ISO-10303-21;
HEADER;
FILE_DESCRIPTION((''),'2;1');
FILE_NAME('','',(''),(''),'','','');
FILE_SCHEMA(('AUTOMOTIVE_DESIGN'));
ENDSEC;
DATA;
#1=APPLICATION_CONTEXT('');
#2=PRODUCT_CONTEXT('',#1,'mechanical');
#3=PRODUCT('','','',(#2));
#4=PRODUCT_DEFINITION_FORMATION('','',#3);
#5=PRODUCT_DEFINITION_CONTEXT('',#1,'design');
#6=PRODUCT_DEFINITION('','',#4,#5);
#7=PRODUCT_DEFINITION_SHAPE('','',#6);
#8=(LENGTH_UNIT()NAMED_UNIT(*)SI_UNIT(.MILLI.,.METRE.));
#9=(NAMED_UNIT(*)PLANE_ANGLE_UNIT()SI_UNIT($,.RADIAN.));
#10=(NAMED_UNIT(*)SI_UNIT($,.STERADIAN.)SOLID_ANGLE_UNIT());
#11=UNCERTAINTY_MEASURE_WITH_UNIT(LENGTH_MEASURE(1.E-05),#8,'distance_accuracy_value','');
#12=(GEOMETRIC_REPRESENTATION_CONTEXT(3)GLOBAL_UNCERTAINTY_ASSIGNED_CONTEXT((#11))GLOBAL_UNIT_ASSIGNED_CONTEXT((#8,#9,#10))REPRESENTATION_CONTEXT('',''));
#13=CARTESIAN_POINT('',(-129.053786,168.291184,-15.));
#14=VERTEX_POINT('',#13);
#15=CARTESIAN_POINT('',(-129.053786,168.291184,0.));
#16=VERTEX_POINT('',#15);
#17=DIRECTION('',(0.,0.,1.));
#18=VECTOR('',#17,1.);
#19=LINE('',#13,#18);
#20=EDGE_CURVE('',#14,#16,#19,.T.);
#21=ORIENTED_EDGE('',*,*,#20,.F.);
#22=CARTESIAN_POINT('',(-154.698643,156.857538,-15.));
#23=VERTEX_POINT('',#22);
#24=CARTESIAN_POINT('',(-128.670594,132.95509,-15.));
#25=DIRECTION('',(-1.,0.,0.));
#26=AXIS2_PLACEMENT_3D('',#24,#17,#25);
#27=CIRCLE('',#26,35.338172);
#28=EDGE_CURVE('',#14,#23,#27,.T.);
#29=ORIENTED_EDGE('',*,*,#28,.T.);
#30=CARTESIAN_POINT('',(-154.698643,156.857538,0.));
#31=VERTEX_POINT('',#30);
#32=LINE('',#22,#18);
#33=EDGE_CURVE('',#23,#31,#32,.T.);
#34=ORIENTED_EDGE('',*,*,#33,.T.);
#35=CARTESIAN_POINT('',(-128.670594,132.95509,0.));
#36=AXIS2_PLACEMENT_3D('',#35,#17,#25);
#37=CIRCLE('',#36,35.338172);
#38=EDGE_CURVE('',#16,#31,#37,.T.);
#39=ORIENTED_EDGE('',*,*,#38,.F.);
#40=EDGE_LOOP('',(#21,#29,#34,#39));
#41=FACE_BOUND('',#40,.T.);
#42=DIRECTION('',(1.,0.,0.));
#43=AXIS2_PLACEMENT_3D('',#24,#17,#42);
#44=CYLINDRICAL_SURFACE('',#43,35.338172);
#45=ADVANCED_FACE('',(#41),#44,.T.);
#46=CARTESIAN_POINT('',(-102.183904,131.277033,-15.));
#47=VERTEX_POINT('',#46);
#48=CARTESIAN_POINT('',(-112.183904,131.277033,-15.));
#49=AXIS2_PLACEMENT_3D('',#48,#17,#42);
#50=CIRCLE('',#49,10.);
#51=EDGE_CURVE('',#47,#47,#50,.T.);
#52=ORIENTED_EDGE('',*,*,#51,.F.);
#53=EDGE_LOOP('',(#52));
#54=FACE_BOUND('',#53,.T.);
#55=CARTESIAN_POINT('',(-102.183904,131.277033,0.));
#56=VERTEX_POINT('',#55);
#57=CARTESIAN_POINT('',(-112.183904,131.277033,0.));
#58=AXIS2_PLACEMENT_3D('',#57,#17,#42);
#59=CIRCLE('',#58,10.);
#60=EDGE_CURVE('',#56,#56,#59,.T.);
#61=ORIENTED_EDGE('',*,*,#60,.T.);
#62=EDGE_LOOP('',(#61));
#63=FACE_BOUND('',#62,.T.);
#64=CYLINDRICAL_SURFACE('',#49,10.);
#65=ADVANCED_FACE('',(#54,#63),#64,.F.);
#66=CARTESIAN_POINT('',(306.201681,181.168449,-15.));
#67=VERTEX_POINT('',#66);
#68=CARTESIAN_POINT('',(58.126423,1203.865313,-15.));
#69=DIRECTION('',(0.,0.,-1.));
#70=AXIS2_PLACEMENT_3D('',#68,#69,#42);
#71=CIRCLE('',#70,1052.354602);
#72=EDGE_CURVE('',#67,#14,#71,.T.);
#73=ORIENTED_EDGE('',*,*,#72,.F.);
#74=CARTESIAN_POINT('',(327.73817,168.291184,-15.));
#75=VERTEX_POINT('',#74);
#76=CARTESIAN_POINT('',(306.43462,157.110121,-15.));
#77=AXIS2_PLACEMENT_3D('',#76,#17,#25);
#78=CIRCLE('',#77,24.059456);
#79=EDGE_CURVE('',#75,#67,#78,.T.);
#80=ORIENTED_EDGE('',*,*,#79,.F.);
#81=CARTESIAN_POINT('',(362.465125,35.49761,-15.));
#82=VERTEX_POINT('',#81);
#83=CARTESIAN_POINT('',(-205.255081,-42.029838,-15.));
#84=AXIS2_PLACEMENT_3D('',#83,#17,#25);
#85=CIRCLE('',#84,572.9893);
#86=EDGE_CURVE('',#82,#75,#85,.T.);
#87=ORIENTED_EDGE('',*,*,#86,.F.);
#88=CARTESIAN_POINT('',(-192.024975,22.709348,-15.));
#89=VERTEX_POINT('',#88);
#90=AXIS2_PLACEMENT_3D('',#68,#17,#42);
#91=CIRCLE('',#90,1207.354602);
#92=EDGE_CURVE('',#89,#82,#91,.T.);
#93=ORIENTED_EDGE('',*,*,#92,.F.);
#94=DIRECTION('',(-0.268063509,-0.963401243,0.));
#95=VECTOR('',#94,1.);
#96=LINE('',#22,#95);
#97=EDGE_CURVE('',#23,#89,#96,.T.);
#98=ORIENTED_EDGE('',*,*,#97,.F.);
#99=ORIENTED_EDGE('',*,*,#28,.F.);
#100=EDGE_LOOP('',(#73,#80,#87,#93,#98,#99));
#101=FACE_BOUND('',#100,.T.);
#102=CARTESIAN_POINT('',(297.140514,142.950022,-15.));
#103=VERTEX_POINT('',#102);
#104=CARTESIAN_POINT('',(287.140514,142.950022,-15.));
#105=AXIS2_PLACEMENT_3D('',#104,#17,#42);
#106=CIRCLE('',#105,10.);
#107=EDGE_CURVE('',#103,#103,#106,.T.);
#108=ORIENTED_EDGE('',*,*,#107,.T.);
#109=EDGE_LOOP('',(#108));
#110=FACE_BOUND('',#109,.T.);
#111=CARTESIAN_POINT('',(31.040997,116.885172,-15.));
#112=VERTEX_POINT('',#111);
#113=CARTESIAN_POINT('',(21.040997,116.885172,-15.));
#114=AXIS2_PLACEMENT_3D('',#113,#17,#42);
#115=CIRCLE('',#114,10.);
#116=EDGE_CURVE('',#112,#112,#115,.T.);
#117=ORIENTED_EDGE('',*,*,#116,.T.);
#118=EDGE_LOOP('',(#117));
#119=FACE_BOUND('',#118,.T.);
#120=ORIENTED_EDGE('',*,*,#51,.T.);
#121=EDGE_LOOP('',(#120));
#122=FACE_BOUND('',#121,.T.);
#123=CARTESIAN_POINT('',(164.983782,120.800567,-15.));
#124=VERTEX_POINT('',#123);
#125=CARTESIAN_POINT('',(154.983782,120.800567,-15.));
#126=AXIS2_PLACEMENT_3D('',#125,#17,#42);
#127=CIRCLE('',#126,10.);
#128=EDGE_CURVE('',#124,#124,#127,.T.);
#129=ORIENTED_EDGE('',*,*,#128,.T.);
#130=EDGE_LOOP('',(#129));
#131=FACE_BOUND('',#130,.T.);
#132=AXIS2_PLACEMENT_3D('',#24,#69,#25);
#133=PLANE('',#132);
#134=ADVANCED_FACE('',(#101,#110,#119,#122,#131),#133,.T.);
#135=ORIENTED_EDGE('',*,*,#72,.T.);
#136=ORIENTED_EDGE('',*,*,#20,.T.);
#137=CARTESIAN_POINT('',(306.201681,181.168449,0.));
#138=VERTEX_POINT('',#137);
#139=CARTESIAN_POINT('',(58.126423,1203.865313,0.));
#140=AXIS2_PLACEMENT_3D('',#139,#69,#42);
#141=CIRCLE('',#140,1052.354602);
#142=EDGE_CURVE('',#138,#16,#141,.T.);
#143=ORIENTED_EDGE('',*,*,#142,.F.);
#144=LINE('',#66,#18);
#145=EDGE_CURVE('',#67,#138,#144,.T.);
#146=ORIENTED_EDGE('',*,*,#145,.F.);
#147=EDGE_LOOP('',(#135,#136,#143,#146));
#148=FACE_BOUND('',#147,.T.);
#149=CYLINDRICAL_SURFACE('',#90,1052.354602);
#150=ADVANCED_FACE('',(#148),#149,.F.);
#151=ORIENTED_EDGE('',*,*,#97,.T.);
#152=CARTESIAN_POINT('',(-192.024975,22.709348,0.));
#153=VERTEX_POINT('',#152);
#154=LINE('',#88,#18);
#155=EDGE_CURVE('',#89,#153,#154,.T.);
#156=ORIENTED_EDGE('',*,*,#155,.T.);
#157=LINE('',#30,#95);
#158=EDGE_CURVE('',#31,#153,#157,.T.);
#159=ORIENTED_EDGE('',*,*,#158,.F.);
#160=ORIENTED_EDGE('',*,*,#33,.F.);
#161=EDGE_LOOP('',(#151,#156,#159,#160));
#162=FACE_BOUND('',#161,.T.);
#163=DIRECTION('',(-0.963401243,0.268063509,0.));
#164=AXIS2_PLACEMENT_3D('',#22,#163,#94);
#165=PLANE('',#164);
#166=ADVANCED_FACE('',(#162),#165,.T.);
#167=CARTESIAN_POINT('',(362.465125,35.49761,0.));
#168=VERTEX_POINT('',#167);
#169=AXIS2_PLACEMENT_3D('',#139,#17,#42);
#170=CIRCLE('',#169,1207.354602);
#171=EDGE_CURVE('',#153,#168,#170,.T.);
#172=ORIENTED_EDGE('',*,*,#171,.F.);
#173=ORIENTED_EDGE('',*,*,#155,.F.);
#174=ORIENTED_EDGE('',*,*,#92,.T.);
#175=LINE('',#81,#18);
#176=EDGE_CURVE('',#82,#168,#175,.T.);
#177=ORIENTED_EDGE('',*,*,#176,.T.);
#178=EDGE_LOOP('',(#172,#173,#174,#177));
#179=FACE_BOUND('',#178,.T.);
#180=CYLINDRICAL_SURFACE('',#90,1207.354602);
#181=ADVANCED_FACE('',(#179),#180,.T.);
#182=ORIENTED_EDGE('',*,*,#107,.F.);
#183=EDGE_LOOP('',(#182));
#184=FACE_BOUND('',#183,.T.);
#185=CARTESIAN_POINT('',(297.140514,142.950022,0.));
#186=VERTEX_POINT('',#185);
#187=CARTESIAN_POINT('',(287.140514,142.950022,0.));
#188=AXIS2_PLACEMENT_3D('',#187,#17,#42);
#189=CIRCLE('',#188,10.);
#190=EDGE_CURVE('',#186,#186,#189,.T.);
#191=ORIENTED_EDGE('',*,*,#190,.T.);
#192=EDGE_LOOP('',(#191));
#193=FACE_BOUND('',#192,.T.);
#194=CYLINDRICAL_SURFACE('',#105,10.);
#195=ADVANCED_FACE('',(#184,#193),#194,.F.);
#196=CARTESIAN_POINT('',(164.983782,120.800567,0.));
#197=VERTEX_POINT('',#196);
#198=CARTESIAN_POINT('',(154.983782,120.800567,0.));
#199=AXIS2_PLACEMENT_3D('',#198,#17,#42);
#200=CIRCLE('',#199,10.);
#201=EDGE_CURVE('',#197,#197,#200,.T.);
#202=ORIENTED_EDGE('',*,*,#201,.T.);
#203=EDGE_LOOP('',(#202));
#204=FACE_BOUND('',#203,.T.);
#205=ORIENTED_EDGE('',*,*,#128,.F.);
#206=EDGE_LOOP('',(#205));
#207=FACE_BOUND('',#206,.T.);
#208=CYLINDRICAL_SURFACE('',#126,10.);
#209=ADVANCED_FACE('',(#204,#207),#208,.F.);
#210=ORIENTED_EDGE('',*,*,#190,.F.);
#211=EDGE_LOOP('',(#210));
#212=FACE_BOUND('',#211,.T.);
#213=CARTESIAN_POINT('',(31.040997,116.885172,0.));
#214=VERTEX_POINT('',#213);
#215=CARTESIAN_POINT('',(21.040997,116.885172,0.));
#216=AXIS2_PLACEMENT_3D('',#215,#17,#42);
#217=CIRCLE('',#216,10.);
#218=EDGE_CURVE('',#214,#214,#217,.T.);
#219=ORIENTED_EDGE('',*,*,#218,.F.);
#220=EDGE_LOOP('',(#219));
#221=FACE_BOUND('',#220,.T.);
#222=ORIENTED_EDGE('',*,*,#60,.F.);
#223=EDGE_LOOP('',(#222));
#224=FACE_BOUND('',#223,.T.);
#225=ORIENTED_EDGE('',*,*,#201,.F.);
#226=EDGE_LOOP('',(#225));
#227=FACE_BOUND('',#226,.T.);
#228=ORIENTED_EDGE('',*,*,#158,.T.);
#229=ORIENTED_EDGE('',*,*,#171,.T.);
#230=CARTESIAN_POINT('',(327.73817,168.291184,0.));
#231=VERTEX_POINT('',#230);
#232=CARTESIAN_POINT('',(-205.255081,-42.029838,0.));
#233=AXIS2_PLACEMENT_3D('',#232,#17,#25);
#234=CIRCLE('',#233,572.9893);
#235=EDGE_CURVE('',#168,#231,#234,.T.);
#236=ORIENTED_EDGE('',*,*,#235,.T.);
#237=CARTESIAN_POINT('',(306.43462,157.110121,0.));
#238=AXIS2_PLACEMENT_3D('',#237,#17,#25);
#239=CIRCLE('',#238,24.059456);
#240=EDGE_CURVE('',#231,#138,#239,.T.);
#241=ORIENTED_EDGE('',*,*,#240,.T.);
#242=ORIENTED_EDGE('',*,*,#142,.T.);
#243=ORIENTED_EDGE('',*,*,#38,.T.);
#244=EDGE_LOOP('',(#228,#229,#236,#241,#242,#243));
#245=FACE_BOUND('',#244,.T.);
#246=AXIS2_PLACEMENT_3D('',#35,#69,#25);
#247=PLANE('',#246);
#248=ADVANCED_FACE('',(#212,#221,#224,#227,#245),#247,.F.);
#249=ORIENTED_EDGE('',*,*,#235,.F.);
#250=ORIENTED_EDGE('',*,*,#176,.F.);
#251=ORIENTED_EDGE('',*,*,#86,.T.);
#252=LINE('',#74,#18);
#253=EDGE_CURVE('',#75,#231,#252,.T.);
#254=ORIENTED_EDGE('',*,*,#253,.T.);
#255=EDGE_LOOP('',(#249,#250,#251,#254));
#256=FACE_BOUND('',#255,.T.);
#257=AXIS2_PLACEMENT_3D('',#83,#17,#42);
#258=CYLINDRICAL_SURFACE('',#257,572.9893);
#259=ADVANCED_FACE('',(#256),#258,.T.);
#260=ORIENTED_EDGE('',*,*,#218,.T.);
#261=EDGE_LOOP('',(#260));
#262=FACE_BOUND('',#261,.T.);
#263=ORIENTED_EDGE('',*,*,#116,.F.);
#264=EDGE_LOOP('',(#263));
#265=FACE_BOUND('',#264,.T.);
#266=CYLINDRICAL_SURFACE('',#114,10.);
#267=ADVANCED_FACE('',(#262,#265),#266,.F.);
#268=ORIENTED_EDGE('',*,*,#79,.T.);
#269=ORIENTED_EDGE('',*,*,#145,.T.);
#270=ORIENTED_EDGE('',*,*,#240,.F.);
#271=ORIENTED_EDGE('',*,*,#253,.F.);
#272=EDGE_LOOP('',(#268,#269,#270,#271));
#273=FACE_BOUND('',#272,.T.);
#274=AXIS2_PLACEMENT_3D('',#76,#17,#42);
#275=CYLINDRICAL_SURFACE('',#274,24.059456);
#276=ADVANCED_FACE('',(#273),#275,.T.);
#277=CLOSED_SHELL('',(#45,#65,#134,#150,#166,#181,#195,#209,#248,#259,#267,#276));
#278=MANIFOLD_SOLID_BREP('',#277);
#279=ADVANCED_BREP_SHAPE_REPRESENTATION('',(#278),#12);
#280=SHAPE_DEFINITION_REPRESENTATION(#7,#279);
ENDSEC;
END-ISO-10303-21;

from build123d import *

# Parameters (mm, degrees)
IZIM1_R            = 10
TABAN_FLAN_1_DEPTH = 15


# Sheet-metal steps are written as plain solids
with BuildPart() as part:
    # Çizim1 → Taban-Flanş1 (new body)
    with BuildSketch(Plane.XY):
        with BuildLine():
            Line((-154.698643159, 156.857538138), (-192.024974986, 22.709348381))
            ThreePointArc((-192.024974986, 22.709348381), (85.964362875, -3.168316981), (362.465125286, 35.497610073))
            ThreePointArc((362.465125286, 35.497610073), (349.092339052, 102.938005803), (327.738170112, 168.291183666))
            ThreePointArc((327.738170112, 168.291183666), (318.781629996, 177.759788443), (306.201680975, 181.168449454))
            ThreePointArc((306.201680975, 181.168449454), (89.247279864, 151.970973974), (-129.053786306, 168.291183666))
            ThreePointArc((-129.053786306, 168.291183666), (-143.060537772, 165.230713571), (-154.698643159, 156.857538138))
        make_face()
        with Locations((-112.183904076, 131.277032831)):
            Circle(IZIM1_R, mode=Mode.SUBTRACT)
        with Locations((21.040997306, 116.885172221)):
            Circle(IZIM1_R, mode=Mode.SUBTRACT)
        with Locations((154.983782422, 120.800566875)):
            Circle(IZIM1_R, mode=Mode.SUBTRACT)
        with Locations((287.140513745, 142.950022083)):
            Circle(IZIM1_R, mode=Mode.SUBTRACT)
    extrude(amount=-TABAN_FLAN_1_DEPTH)


solid = part.part
